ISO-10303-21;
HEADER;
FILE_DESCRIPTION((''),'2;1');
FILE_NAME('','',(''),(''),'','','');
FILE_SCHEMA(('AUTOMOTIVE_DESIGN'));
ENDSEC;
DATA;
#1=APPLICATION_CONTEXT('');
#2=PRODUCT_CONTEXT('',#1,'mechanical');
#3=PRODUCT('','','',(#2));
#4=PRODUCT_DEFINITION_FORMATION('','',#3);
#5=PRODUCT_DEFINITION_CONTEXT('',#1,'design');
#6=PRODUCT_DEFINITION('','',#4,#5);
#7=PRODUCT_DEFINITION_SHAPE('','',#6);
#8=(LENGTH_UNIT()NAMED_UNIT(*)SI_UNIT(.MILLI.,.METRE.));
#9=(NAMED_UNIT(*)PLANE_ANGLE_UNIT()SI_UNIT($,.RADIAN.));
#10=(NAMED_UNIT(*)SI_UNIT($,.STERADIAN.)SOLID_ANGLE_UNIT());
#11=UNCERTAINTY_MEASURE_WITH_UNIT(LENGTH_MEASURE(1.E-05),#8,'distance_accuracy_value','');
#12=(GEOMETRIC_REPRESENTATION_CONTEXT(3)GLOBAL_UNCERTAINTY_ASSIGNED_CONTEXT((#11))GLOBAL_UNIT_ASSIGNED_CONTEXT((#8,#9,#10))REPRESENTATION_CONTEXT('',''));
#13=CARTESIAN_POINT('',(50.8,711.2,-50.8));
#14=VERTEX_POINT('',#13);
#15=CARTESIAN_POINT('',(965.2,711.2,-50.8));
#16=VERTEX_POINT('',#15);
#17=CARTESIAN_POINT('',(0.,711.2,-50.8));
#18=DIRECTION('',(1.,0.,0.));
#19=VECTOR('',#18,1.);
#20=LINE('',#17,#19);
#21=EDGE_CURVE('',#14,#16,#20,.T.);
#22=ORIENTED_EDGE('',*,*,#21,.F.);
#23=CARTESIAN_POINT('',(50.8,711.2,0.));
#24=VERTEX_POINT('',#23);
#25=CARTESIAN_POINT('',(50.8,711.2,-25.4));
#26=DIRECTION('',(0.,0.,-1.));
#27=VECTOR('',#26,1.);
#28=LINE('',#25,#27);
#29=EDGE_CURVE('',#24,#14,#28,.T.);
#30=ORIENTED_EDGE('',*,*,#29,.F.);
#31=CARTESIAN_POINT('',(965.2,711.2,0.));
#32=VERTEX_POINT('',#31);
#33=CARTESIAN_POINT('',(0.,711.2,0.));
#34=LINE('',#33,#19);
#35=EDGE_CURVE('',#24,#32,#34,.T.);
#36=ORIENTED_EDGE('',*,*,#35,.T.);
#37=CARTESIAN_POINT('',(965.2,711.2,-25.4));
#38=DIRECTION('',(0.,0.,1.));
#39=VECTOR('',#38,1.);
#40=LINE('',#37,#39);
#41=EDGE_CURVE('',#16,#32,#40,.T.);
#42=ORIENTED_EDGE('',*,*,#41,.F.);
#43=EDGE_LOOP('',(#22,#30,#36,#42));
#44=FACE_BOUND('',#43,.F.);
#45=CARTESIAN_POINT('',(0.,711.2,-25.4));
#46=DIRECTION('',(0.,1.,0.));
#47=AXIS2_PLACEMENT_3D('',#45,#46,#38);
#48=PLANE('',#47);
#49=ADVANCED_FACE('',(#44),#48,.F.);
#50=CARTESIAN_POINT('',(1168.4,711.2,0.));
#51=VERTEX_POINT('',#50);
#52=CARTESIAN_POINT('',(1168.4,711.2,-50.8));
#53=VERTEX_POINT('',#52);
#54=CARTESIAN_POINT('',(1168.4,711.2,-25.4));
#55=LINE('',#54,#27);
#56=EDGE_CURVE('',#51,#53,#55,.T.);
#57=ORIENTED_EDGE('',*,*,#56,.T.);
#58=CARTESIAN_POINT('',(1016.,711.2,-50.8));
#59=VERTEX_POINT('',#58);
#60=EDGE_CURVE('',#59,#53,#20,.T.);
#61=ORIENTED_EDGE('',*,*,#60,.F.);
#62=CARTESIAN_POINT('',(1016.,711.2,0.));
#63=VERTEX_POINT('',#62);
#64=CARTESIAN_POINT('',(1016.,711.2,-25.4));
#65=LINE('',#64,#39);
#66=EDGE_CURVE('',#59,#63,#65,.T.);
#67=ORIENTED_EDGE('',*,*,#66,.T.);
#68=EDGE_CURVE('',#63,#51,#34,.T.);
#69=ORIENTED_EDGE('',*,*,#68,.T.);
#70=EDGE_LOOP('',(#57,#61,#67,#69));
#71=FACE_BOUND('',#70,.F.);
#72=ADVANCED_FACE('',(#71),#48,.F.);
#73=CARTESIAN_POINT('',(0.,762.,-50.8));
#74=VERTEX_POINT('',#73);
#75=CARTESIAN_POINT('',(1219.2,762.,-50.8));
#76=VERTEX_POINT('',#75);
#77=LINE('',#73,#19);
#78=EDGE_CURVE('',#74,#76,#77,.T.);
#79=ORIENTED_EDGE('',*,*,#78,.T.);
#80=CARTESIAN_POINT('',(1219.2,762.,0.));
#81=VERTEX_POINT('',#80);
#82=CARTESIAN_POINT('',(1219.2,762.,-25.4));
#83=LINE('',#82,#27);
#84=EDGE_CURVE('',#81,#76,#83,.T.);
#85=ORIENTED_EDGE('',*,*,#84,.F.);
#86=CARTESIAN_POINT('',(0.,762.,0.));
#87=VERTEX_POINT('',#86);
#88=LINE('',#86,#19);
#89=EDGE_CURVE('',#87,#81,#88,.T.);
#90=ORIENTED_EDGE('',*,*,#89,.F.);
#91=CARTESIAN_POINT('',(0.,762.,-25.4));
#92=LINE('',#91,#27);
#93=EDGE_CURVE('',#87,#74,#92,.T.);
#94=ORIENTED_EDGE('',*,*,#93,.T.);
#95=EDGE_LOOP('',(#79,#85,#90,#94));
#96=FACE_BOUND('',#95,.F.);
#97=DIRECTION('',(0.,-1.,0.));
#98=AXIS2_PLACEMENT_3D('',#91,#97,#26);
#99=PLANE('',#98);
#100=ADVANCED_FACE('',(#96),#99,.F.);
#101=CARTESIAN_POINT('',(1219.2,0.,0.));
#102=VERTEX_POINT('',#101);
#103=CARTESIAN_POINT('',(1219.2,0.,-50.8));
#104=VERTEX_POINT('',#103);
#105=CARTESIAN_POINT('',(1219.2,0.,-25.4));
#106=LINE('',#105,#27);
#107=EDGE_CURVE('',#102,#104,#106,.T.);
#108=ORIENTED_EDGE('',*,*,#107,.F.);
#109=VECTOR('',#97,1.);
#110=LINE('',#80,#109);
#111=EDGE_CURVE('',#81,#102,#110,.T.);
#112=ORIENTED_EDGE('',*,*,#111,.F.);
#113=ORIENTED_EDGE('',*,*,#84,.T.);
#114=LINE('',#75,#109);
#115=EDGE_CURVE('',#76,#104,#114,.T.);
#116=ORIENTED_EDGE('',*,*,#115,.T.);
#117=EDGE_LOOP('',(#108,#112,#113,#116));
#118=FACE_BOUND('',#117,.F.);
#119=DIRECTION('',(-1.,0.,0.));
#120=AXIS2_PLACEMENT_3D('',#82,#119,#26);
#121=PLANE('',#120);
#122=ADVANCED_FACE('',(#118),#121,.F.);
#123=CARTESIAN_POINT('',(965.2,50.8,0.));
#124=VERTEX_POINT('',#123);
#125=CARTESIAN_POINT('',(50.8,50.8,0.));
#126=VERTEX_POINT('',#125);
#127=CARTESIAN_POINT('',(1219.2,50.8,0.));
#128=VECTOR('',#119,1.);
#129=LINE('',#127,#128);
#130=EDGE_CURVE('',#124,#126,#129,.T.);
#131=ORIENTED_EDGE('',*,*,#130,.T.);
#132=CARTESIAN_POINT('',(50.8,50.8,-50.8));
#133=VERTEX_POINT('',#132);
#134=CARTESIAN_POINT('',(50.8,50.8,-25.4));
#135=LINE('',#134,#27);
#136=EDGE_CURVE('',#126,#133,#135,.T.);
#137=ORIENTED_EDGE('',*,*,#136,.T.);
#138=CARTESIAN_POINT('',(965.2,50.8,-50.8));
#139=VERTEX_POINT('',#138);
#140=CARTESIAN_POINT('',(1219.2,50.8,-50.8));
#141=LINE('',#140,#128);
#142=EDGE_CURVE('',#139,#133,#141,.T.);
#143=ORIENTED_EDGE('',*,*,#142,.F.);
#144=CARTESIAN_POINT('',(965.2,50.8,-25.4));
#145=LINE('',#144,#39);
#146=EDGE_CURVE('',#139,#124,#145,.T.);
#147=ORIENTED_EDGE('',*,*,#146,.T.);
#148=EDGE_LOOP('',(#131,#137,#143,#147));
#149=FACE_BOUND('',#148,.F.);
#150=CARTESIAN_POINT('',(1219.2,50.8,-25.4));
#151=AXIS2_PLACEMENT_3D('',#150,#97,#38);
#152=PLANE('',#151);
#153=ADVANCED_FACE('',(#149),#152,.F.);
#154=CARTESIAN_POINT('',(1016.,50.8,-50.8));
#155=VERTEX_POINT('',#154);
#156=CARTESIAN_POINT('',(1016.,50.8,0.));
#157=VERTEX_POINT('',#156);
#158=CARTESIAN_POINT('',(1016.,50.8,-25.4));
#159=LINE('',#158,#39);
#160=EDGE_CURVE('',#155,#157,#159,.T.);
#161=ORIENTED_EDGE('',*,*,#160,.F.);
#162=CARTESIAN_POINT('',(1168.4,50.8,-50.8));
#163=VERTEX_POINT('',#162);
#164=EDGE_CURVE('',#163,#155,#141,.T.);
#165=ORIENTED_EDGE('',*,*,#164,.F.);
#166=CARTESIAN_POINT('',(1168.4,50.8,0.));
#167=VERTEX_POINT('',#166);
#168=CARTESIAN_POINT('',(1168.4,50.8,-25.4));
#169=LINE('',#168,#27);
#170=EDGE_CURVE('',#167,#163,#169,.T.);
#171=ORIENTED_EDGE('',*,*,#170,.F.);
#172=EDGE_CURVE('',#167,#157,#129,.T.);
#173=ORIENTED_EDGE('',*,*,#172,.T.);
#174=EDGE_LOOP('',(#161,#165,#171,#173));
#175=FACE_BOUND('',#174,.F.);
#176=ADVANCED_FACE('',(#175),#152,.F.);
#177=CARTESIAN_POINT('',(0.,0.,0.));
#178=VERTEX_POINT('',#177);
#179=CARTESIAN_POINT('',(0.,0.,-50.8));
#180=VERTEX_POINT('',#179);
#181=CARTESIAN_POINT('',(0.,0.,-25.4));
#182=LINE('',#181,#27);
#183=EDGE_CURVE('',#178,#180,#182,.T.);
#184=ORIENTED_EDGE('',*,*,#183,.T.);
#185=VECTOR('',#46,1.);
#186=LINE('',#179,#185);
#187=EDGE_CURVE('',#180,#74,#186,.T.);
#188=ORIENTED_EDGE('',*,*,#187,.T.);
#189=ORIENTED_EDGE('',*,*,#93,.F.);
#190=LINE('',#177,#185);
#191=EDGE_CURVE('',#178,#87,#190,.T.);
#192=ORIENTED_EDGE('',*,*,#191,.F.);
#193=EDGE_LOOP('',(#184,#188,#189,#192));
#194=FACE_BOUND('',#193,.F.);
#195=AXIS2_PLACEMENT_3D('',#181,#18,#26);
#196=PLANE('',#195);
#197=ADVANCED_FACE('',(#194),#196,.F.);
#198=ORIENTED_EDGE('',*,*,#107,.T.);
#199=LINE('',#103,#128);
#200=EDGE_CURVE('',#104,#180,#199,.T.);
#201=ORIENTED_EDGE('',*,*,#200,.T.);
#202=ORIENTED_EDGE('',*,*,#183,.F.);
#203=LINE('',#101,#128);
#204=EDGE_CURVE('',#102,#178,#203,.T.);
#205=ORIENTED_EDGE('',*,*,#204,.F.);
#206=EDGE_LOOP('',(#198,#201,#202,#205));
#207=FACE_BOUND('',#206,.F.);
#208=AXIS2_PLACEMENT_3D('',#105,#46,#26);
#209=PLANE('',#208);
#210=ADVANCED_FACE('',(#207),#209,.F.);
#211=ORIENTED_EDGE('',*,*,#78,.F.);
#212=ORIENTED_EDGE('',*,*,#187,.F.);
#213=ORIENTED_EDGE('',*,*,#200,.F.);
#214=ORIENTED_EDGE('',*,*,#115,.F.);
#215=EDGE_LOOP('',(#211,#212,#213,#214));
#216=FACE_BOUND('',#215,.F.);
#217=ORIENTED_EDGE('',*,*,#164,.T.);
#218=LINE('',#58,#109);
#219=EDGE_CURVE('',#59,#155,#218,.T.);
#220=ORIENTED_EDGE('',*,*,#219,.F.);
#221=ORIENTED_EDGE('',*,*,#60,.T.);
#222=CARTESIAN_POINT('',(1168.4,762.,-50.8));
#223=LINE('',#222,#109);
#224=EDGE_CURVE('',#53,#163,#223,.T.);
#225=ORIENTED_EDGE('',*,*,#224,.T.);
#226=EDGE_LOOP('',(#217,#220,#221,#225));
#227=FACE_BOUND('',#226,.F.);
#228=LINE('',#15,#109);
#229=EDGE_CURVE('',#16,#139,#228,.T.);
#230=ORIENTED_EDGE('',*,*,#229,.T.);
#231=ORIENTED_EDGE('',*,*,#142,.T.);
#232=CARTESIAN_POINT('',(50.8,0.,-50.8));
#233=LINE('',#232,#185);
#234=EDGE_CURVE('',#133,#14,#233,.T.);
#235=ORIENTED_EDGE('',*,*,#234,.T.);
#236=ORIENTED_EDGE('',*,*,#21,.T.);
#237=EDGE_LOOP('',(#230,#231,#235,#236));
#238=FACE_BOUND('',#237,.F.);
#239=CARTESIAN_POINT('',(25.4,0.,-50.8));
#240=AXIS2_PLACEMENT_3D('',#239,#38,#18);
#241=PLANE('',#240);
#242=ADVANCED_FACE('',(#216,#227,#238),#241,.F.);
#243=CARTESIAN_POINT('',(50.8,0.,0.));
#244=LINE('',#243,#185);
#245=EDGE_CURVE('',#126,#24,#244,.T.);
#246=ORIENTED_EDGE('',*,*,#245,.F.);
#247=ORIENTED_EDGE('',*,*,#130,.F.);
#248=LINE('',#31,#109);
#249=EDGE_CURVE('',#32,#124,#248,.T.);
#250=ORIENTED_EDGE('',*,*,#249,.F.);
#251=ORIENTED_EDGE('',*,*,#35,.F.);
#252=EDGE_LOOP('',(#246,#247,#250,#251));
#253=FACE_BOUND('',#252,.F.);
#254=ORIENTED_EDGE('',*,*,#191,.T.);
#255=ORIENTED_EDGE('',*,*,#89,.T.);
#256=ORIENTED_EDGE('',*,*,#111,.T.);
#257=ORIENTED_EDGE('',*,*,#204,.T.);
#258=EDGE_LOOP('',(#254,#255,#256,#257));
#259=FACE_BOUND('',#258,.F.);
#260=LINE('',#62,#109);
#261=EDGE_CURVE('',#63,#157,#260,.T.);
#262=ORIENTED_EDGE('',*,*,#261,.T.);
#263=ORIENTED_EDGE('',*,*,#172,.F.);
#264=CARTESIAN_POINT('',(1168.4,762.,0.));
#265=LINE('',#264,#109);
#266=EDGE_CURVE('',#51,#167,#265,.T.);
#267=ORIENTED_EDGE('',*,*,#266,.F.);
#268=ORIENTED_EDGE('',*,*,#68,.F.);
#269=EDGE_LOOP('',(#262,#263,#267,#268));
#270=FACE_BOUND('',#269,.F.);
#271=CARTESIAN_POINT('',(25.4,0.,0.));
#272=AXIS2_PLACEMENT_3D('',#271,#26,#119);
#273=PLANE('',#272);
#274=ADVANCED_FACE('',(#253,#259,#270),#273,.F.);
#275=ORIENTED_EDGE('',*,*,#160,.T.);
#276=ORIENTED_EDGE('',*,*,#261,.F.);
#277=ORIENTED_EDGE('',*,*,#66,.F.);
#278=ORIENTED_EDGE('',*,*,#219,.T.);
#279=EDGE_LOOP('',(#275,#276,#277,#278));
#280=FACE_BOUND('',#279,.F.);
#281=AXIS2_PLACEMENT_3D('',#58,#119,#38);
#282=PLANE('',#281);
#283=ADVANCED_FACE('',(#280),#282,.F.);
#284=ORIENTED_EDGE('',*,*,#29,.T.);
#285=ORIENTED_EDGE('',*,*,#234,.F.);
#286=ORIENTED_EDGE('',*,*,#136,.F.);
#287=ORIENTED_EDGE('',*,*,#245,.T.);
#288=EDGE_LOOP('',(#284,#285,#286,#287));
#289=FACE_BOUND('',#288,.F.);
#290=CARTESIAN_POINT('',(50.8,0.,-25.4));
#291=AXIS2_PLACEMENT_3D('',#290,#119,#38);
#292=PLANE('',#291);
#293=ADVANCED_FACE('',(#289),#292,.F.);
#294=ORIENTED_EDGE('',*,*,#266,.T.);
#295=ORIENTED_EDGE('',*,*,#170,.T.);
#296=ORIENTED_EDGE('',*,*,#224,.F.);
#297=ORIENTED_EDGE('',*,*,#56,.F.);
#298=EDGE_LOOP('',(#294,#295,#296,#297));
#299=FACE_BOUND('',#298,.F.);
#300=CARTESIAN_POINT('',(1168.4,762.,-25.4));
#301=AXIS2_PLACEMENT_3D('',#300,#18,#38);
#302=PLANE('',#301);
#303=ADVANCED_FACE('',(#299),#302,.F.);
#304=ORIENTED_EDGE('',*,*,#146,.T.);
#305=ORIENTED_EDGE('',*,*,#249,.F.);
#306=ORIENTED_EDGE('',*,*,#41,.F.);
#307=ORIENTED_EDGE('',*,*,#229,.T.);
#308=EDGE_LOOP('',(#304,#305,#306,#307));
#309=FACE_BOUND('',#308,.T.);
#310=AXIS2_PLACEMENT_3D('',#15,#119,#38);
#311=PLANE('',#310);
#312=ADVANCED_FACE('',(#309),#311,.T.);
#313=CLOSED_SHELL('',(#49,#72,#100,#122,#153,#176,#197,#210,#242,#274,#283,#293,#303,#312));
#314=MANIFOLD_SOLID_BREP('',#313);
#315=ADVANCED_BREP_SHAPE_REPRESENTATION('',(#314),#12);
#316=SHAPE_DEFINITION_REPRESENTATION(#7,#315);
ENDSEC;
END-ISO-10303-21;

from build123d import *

# Parameters (mm, degrees)
F1_W     = 50.8
F1_H     = 50.8
F3_W     = 50.8
F3_H     = 50.8
F4_DEPTH = 660.4


with BuildPart() as f2:
    # F2: sweep along a path in F0
    with BuildLine(Plane.XY) as f2_path:
        Line((0, 0), (0, 762))
        Line((0, 762), (1219.2, 762))
        Line((1219.2, 762), (1219.2, 0))
        Line((1219.2, 0), (0, 0))
    # F1 (on Front) → F2 (sweep)
    with BuildSketch(Plane.XZ):
        with Locations((25.4, -25.4)):
            Rectangle(F1_W, F1_H)
    sweep(path=f2_path.line, transition=Transition.RIGHT)

    # F3 (on face) → F4 (join, through all)
    with BuildSketch(Plane.XZ.offset(-711.2)):
        with Locations((990.6, -25.4)):
            Rectangle(F3_W, F3_H)
    extrude(amount=F4_DEPTH)


solid = f2.part
